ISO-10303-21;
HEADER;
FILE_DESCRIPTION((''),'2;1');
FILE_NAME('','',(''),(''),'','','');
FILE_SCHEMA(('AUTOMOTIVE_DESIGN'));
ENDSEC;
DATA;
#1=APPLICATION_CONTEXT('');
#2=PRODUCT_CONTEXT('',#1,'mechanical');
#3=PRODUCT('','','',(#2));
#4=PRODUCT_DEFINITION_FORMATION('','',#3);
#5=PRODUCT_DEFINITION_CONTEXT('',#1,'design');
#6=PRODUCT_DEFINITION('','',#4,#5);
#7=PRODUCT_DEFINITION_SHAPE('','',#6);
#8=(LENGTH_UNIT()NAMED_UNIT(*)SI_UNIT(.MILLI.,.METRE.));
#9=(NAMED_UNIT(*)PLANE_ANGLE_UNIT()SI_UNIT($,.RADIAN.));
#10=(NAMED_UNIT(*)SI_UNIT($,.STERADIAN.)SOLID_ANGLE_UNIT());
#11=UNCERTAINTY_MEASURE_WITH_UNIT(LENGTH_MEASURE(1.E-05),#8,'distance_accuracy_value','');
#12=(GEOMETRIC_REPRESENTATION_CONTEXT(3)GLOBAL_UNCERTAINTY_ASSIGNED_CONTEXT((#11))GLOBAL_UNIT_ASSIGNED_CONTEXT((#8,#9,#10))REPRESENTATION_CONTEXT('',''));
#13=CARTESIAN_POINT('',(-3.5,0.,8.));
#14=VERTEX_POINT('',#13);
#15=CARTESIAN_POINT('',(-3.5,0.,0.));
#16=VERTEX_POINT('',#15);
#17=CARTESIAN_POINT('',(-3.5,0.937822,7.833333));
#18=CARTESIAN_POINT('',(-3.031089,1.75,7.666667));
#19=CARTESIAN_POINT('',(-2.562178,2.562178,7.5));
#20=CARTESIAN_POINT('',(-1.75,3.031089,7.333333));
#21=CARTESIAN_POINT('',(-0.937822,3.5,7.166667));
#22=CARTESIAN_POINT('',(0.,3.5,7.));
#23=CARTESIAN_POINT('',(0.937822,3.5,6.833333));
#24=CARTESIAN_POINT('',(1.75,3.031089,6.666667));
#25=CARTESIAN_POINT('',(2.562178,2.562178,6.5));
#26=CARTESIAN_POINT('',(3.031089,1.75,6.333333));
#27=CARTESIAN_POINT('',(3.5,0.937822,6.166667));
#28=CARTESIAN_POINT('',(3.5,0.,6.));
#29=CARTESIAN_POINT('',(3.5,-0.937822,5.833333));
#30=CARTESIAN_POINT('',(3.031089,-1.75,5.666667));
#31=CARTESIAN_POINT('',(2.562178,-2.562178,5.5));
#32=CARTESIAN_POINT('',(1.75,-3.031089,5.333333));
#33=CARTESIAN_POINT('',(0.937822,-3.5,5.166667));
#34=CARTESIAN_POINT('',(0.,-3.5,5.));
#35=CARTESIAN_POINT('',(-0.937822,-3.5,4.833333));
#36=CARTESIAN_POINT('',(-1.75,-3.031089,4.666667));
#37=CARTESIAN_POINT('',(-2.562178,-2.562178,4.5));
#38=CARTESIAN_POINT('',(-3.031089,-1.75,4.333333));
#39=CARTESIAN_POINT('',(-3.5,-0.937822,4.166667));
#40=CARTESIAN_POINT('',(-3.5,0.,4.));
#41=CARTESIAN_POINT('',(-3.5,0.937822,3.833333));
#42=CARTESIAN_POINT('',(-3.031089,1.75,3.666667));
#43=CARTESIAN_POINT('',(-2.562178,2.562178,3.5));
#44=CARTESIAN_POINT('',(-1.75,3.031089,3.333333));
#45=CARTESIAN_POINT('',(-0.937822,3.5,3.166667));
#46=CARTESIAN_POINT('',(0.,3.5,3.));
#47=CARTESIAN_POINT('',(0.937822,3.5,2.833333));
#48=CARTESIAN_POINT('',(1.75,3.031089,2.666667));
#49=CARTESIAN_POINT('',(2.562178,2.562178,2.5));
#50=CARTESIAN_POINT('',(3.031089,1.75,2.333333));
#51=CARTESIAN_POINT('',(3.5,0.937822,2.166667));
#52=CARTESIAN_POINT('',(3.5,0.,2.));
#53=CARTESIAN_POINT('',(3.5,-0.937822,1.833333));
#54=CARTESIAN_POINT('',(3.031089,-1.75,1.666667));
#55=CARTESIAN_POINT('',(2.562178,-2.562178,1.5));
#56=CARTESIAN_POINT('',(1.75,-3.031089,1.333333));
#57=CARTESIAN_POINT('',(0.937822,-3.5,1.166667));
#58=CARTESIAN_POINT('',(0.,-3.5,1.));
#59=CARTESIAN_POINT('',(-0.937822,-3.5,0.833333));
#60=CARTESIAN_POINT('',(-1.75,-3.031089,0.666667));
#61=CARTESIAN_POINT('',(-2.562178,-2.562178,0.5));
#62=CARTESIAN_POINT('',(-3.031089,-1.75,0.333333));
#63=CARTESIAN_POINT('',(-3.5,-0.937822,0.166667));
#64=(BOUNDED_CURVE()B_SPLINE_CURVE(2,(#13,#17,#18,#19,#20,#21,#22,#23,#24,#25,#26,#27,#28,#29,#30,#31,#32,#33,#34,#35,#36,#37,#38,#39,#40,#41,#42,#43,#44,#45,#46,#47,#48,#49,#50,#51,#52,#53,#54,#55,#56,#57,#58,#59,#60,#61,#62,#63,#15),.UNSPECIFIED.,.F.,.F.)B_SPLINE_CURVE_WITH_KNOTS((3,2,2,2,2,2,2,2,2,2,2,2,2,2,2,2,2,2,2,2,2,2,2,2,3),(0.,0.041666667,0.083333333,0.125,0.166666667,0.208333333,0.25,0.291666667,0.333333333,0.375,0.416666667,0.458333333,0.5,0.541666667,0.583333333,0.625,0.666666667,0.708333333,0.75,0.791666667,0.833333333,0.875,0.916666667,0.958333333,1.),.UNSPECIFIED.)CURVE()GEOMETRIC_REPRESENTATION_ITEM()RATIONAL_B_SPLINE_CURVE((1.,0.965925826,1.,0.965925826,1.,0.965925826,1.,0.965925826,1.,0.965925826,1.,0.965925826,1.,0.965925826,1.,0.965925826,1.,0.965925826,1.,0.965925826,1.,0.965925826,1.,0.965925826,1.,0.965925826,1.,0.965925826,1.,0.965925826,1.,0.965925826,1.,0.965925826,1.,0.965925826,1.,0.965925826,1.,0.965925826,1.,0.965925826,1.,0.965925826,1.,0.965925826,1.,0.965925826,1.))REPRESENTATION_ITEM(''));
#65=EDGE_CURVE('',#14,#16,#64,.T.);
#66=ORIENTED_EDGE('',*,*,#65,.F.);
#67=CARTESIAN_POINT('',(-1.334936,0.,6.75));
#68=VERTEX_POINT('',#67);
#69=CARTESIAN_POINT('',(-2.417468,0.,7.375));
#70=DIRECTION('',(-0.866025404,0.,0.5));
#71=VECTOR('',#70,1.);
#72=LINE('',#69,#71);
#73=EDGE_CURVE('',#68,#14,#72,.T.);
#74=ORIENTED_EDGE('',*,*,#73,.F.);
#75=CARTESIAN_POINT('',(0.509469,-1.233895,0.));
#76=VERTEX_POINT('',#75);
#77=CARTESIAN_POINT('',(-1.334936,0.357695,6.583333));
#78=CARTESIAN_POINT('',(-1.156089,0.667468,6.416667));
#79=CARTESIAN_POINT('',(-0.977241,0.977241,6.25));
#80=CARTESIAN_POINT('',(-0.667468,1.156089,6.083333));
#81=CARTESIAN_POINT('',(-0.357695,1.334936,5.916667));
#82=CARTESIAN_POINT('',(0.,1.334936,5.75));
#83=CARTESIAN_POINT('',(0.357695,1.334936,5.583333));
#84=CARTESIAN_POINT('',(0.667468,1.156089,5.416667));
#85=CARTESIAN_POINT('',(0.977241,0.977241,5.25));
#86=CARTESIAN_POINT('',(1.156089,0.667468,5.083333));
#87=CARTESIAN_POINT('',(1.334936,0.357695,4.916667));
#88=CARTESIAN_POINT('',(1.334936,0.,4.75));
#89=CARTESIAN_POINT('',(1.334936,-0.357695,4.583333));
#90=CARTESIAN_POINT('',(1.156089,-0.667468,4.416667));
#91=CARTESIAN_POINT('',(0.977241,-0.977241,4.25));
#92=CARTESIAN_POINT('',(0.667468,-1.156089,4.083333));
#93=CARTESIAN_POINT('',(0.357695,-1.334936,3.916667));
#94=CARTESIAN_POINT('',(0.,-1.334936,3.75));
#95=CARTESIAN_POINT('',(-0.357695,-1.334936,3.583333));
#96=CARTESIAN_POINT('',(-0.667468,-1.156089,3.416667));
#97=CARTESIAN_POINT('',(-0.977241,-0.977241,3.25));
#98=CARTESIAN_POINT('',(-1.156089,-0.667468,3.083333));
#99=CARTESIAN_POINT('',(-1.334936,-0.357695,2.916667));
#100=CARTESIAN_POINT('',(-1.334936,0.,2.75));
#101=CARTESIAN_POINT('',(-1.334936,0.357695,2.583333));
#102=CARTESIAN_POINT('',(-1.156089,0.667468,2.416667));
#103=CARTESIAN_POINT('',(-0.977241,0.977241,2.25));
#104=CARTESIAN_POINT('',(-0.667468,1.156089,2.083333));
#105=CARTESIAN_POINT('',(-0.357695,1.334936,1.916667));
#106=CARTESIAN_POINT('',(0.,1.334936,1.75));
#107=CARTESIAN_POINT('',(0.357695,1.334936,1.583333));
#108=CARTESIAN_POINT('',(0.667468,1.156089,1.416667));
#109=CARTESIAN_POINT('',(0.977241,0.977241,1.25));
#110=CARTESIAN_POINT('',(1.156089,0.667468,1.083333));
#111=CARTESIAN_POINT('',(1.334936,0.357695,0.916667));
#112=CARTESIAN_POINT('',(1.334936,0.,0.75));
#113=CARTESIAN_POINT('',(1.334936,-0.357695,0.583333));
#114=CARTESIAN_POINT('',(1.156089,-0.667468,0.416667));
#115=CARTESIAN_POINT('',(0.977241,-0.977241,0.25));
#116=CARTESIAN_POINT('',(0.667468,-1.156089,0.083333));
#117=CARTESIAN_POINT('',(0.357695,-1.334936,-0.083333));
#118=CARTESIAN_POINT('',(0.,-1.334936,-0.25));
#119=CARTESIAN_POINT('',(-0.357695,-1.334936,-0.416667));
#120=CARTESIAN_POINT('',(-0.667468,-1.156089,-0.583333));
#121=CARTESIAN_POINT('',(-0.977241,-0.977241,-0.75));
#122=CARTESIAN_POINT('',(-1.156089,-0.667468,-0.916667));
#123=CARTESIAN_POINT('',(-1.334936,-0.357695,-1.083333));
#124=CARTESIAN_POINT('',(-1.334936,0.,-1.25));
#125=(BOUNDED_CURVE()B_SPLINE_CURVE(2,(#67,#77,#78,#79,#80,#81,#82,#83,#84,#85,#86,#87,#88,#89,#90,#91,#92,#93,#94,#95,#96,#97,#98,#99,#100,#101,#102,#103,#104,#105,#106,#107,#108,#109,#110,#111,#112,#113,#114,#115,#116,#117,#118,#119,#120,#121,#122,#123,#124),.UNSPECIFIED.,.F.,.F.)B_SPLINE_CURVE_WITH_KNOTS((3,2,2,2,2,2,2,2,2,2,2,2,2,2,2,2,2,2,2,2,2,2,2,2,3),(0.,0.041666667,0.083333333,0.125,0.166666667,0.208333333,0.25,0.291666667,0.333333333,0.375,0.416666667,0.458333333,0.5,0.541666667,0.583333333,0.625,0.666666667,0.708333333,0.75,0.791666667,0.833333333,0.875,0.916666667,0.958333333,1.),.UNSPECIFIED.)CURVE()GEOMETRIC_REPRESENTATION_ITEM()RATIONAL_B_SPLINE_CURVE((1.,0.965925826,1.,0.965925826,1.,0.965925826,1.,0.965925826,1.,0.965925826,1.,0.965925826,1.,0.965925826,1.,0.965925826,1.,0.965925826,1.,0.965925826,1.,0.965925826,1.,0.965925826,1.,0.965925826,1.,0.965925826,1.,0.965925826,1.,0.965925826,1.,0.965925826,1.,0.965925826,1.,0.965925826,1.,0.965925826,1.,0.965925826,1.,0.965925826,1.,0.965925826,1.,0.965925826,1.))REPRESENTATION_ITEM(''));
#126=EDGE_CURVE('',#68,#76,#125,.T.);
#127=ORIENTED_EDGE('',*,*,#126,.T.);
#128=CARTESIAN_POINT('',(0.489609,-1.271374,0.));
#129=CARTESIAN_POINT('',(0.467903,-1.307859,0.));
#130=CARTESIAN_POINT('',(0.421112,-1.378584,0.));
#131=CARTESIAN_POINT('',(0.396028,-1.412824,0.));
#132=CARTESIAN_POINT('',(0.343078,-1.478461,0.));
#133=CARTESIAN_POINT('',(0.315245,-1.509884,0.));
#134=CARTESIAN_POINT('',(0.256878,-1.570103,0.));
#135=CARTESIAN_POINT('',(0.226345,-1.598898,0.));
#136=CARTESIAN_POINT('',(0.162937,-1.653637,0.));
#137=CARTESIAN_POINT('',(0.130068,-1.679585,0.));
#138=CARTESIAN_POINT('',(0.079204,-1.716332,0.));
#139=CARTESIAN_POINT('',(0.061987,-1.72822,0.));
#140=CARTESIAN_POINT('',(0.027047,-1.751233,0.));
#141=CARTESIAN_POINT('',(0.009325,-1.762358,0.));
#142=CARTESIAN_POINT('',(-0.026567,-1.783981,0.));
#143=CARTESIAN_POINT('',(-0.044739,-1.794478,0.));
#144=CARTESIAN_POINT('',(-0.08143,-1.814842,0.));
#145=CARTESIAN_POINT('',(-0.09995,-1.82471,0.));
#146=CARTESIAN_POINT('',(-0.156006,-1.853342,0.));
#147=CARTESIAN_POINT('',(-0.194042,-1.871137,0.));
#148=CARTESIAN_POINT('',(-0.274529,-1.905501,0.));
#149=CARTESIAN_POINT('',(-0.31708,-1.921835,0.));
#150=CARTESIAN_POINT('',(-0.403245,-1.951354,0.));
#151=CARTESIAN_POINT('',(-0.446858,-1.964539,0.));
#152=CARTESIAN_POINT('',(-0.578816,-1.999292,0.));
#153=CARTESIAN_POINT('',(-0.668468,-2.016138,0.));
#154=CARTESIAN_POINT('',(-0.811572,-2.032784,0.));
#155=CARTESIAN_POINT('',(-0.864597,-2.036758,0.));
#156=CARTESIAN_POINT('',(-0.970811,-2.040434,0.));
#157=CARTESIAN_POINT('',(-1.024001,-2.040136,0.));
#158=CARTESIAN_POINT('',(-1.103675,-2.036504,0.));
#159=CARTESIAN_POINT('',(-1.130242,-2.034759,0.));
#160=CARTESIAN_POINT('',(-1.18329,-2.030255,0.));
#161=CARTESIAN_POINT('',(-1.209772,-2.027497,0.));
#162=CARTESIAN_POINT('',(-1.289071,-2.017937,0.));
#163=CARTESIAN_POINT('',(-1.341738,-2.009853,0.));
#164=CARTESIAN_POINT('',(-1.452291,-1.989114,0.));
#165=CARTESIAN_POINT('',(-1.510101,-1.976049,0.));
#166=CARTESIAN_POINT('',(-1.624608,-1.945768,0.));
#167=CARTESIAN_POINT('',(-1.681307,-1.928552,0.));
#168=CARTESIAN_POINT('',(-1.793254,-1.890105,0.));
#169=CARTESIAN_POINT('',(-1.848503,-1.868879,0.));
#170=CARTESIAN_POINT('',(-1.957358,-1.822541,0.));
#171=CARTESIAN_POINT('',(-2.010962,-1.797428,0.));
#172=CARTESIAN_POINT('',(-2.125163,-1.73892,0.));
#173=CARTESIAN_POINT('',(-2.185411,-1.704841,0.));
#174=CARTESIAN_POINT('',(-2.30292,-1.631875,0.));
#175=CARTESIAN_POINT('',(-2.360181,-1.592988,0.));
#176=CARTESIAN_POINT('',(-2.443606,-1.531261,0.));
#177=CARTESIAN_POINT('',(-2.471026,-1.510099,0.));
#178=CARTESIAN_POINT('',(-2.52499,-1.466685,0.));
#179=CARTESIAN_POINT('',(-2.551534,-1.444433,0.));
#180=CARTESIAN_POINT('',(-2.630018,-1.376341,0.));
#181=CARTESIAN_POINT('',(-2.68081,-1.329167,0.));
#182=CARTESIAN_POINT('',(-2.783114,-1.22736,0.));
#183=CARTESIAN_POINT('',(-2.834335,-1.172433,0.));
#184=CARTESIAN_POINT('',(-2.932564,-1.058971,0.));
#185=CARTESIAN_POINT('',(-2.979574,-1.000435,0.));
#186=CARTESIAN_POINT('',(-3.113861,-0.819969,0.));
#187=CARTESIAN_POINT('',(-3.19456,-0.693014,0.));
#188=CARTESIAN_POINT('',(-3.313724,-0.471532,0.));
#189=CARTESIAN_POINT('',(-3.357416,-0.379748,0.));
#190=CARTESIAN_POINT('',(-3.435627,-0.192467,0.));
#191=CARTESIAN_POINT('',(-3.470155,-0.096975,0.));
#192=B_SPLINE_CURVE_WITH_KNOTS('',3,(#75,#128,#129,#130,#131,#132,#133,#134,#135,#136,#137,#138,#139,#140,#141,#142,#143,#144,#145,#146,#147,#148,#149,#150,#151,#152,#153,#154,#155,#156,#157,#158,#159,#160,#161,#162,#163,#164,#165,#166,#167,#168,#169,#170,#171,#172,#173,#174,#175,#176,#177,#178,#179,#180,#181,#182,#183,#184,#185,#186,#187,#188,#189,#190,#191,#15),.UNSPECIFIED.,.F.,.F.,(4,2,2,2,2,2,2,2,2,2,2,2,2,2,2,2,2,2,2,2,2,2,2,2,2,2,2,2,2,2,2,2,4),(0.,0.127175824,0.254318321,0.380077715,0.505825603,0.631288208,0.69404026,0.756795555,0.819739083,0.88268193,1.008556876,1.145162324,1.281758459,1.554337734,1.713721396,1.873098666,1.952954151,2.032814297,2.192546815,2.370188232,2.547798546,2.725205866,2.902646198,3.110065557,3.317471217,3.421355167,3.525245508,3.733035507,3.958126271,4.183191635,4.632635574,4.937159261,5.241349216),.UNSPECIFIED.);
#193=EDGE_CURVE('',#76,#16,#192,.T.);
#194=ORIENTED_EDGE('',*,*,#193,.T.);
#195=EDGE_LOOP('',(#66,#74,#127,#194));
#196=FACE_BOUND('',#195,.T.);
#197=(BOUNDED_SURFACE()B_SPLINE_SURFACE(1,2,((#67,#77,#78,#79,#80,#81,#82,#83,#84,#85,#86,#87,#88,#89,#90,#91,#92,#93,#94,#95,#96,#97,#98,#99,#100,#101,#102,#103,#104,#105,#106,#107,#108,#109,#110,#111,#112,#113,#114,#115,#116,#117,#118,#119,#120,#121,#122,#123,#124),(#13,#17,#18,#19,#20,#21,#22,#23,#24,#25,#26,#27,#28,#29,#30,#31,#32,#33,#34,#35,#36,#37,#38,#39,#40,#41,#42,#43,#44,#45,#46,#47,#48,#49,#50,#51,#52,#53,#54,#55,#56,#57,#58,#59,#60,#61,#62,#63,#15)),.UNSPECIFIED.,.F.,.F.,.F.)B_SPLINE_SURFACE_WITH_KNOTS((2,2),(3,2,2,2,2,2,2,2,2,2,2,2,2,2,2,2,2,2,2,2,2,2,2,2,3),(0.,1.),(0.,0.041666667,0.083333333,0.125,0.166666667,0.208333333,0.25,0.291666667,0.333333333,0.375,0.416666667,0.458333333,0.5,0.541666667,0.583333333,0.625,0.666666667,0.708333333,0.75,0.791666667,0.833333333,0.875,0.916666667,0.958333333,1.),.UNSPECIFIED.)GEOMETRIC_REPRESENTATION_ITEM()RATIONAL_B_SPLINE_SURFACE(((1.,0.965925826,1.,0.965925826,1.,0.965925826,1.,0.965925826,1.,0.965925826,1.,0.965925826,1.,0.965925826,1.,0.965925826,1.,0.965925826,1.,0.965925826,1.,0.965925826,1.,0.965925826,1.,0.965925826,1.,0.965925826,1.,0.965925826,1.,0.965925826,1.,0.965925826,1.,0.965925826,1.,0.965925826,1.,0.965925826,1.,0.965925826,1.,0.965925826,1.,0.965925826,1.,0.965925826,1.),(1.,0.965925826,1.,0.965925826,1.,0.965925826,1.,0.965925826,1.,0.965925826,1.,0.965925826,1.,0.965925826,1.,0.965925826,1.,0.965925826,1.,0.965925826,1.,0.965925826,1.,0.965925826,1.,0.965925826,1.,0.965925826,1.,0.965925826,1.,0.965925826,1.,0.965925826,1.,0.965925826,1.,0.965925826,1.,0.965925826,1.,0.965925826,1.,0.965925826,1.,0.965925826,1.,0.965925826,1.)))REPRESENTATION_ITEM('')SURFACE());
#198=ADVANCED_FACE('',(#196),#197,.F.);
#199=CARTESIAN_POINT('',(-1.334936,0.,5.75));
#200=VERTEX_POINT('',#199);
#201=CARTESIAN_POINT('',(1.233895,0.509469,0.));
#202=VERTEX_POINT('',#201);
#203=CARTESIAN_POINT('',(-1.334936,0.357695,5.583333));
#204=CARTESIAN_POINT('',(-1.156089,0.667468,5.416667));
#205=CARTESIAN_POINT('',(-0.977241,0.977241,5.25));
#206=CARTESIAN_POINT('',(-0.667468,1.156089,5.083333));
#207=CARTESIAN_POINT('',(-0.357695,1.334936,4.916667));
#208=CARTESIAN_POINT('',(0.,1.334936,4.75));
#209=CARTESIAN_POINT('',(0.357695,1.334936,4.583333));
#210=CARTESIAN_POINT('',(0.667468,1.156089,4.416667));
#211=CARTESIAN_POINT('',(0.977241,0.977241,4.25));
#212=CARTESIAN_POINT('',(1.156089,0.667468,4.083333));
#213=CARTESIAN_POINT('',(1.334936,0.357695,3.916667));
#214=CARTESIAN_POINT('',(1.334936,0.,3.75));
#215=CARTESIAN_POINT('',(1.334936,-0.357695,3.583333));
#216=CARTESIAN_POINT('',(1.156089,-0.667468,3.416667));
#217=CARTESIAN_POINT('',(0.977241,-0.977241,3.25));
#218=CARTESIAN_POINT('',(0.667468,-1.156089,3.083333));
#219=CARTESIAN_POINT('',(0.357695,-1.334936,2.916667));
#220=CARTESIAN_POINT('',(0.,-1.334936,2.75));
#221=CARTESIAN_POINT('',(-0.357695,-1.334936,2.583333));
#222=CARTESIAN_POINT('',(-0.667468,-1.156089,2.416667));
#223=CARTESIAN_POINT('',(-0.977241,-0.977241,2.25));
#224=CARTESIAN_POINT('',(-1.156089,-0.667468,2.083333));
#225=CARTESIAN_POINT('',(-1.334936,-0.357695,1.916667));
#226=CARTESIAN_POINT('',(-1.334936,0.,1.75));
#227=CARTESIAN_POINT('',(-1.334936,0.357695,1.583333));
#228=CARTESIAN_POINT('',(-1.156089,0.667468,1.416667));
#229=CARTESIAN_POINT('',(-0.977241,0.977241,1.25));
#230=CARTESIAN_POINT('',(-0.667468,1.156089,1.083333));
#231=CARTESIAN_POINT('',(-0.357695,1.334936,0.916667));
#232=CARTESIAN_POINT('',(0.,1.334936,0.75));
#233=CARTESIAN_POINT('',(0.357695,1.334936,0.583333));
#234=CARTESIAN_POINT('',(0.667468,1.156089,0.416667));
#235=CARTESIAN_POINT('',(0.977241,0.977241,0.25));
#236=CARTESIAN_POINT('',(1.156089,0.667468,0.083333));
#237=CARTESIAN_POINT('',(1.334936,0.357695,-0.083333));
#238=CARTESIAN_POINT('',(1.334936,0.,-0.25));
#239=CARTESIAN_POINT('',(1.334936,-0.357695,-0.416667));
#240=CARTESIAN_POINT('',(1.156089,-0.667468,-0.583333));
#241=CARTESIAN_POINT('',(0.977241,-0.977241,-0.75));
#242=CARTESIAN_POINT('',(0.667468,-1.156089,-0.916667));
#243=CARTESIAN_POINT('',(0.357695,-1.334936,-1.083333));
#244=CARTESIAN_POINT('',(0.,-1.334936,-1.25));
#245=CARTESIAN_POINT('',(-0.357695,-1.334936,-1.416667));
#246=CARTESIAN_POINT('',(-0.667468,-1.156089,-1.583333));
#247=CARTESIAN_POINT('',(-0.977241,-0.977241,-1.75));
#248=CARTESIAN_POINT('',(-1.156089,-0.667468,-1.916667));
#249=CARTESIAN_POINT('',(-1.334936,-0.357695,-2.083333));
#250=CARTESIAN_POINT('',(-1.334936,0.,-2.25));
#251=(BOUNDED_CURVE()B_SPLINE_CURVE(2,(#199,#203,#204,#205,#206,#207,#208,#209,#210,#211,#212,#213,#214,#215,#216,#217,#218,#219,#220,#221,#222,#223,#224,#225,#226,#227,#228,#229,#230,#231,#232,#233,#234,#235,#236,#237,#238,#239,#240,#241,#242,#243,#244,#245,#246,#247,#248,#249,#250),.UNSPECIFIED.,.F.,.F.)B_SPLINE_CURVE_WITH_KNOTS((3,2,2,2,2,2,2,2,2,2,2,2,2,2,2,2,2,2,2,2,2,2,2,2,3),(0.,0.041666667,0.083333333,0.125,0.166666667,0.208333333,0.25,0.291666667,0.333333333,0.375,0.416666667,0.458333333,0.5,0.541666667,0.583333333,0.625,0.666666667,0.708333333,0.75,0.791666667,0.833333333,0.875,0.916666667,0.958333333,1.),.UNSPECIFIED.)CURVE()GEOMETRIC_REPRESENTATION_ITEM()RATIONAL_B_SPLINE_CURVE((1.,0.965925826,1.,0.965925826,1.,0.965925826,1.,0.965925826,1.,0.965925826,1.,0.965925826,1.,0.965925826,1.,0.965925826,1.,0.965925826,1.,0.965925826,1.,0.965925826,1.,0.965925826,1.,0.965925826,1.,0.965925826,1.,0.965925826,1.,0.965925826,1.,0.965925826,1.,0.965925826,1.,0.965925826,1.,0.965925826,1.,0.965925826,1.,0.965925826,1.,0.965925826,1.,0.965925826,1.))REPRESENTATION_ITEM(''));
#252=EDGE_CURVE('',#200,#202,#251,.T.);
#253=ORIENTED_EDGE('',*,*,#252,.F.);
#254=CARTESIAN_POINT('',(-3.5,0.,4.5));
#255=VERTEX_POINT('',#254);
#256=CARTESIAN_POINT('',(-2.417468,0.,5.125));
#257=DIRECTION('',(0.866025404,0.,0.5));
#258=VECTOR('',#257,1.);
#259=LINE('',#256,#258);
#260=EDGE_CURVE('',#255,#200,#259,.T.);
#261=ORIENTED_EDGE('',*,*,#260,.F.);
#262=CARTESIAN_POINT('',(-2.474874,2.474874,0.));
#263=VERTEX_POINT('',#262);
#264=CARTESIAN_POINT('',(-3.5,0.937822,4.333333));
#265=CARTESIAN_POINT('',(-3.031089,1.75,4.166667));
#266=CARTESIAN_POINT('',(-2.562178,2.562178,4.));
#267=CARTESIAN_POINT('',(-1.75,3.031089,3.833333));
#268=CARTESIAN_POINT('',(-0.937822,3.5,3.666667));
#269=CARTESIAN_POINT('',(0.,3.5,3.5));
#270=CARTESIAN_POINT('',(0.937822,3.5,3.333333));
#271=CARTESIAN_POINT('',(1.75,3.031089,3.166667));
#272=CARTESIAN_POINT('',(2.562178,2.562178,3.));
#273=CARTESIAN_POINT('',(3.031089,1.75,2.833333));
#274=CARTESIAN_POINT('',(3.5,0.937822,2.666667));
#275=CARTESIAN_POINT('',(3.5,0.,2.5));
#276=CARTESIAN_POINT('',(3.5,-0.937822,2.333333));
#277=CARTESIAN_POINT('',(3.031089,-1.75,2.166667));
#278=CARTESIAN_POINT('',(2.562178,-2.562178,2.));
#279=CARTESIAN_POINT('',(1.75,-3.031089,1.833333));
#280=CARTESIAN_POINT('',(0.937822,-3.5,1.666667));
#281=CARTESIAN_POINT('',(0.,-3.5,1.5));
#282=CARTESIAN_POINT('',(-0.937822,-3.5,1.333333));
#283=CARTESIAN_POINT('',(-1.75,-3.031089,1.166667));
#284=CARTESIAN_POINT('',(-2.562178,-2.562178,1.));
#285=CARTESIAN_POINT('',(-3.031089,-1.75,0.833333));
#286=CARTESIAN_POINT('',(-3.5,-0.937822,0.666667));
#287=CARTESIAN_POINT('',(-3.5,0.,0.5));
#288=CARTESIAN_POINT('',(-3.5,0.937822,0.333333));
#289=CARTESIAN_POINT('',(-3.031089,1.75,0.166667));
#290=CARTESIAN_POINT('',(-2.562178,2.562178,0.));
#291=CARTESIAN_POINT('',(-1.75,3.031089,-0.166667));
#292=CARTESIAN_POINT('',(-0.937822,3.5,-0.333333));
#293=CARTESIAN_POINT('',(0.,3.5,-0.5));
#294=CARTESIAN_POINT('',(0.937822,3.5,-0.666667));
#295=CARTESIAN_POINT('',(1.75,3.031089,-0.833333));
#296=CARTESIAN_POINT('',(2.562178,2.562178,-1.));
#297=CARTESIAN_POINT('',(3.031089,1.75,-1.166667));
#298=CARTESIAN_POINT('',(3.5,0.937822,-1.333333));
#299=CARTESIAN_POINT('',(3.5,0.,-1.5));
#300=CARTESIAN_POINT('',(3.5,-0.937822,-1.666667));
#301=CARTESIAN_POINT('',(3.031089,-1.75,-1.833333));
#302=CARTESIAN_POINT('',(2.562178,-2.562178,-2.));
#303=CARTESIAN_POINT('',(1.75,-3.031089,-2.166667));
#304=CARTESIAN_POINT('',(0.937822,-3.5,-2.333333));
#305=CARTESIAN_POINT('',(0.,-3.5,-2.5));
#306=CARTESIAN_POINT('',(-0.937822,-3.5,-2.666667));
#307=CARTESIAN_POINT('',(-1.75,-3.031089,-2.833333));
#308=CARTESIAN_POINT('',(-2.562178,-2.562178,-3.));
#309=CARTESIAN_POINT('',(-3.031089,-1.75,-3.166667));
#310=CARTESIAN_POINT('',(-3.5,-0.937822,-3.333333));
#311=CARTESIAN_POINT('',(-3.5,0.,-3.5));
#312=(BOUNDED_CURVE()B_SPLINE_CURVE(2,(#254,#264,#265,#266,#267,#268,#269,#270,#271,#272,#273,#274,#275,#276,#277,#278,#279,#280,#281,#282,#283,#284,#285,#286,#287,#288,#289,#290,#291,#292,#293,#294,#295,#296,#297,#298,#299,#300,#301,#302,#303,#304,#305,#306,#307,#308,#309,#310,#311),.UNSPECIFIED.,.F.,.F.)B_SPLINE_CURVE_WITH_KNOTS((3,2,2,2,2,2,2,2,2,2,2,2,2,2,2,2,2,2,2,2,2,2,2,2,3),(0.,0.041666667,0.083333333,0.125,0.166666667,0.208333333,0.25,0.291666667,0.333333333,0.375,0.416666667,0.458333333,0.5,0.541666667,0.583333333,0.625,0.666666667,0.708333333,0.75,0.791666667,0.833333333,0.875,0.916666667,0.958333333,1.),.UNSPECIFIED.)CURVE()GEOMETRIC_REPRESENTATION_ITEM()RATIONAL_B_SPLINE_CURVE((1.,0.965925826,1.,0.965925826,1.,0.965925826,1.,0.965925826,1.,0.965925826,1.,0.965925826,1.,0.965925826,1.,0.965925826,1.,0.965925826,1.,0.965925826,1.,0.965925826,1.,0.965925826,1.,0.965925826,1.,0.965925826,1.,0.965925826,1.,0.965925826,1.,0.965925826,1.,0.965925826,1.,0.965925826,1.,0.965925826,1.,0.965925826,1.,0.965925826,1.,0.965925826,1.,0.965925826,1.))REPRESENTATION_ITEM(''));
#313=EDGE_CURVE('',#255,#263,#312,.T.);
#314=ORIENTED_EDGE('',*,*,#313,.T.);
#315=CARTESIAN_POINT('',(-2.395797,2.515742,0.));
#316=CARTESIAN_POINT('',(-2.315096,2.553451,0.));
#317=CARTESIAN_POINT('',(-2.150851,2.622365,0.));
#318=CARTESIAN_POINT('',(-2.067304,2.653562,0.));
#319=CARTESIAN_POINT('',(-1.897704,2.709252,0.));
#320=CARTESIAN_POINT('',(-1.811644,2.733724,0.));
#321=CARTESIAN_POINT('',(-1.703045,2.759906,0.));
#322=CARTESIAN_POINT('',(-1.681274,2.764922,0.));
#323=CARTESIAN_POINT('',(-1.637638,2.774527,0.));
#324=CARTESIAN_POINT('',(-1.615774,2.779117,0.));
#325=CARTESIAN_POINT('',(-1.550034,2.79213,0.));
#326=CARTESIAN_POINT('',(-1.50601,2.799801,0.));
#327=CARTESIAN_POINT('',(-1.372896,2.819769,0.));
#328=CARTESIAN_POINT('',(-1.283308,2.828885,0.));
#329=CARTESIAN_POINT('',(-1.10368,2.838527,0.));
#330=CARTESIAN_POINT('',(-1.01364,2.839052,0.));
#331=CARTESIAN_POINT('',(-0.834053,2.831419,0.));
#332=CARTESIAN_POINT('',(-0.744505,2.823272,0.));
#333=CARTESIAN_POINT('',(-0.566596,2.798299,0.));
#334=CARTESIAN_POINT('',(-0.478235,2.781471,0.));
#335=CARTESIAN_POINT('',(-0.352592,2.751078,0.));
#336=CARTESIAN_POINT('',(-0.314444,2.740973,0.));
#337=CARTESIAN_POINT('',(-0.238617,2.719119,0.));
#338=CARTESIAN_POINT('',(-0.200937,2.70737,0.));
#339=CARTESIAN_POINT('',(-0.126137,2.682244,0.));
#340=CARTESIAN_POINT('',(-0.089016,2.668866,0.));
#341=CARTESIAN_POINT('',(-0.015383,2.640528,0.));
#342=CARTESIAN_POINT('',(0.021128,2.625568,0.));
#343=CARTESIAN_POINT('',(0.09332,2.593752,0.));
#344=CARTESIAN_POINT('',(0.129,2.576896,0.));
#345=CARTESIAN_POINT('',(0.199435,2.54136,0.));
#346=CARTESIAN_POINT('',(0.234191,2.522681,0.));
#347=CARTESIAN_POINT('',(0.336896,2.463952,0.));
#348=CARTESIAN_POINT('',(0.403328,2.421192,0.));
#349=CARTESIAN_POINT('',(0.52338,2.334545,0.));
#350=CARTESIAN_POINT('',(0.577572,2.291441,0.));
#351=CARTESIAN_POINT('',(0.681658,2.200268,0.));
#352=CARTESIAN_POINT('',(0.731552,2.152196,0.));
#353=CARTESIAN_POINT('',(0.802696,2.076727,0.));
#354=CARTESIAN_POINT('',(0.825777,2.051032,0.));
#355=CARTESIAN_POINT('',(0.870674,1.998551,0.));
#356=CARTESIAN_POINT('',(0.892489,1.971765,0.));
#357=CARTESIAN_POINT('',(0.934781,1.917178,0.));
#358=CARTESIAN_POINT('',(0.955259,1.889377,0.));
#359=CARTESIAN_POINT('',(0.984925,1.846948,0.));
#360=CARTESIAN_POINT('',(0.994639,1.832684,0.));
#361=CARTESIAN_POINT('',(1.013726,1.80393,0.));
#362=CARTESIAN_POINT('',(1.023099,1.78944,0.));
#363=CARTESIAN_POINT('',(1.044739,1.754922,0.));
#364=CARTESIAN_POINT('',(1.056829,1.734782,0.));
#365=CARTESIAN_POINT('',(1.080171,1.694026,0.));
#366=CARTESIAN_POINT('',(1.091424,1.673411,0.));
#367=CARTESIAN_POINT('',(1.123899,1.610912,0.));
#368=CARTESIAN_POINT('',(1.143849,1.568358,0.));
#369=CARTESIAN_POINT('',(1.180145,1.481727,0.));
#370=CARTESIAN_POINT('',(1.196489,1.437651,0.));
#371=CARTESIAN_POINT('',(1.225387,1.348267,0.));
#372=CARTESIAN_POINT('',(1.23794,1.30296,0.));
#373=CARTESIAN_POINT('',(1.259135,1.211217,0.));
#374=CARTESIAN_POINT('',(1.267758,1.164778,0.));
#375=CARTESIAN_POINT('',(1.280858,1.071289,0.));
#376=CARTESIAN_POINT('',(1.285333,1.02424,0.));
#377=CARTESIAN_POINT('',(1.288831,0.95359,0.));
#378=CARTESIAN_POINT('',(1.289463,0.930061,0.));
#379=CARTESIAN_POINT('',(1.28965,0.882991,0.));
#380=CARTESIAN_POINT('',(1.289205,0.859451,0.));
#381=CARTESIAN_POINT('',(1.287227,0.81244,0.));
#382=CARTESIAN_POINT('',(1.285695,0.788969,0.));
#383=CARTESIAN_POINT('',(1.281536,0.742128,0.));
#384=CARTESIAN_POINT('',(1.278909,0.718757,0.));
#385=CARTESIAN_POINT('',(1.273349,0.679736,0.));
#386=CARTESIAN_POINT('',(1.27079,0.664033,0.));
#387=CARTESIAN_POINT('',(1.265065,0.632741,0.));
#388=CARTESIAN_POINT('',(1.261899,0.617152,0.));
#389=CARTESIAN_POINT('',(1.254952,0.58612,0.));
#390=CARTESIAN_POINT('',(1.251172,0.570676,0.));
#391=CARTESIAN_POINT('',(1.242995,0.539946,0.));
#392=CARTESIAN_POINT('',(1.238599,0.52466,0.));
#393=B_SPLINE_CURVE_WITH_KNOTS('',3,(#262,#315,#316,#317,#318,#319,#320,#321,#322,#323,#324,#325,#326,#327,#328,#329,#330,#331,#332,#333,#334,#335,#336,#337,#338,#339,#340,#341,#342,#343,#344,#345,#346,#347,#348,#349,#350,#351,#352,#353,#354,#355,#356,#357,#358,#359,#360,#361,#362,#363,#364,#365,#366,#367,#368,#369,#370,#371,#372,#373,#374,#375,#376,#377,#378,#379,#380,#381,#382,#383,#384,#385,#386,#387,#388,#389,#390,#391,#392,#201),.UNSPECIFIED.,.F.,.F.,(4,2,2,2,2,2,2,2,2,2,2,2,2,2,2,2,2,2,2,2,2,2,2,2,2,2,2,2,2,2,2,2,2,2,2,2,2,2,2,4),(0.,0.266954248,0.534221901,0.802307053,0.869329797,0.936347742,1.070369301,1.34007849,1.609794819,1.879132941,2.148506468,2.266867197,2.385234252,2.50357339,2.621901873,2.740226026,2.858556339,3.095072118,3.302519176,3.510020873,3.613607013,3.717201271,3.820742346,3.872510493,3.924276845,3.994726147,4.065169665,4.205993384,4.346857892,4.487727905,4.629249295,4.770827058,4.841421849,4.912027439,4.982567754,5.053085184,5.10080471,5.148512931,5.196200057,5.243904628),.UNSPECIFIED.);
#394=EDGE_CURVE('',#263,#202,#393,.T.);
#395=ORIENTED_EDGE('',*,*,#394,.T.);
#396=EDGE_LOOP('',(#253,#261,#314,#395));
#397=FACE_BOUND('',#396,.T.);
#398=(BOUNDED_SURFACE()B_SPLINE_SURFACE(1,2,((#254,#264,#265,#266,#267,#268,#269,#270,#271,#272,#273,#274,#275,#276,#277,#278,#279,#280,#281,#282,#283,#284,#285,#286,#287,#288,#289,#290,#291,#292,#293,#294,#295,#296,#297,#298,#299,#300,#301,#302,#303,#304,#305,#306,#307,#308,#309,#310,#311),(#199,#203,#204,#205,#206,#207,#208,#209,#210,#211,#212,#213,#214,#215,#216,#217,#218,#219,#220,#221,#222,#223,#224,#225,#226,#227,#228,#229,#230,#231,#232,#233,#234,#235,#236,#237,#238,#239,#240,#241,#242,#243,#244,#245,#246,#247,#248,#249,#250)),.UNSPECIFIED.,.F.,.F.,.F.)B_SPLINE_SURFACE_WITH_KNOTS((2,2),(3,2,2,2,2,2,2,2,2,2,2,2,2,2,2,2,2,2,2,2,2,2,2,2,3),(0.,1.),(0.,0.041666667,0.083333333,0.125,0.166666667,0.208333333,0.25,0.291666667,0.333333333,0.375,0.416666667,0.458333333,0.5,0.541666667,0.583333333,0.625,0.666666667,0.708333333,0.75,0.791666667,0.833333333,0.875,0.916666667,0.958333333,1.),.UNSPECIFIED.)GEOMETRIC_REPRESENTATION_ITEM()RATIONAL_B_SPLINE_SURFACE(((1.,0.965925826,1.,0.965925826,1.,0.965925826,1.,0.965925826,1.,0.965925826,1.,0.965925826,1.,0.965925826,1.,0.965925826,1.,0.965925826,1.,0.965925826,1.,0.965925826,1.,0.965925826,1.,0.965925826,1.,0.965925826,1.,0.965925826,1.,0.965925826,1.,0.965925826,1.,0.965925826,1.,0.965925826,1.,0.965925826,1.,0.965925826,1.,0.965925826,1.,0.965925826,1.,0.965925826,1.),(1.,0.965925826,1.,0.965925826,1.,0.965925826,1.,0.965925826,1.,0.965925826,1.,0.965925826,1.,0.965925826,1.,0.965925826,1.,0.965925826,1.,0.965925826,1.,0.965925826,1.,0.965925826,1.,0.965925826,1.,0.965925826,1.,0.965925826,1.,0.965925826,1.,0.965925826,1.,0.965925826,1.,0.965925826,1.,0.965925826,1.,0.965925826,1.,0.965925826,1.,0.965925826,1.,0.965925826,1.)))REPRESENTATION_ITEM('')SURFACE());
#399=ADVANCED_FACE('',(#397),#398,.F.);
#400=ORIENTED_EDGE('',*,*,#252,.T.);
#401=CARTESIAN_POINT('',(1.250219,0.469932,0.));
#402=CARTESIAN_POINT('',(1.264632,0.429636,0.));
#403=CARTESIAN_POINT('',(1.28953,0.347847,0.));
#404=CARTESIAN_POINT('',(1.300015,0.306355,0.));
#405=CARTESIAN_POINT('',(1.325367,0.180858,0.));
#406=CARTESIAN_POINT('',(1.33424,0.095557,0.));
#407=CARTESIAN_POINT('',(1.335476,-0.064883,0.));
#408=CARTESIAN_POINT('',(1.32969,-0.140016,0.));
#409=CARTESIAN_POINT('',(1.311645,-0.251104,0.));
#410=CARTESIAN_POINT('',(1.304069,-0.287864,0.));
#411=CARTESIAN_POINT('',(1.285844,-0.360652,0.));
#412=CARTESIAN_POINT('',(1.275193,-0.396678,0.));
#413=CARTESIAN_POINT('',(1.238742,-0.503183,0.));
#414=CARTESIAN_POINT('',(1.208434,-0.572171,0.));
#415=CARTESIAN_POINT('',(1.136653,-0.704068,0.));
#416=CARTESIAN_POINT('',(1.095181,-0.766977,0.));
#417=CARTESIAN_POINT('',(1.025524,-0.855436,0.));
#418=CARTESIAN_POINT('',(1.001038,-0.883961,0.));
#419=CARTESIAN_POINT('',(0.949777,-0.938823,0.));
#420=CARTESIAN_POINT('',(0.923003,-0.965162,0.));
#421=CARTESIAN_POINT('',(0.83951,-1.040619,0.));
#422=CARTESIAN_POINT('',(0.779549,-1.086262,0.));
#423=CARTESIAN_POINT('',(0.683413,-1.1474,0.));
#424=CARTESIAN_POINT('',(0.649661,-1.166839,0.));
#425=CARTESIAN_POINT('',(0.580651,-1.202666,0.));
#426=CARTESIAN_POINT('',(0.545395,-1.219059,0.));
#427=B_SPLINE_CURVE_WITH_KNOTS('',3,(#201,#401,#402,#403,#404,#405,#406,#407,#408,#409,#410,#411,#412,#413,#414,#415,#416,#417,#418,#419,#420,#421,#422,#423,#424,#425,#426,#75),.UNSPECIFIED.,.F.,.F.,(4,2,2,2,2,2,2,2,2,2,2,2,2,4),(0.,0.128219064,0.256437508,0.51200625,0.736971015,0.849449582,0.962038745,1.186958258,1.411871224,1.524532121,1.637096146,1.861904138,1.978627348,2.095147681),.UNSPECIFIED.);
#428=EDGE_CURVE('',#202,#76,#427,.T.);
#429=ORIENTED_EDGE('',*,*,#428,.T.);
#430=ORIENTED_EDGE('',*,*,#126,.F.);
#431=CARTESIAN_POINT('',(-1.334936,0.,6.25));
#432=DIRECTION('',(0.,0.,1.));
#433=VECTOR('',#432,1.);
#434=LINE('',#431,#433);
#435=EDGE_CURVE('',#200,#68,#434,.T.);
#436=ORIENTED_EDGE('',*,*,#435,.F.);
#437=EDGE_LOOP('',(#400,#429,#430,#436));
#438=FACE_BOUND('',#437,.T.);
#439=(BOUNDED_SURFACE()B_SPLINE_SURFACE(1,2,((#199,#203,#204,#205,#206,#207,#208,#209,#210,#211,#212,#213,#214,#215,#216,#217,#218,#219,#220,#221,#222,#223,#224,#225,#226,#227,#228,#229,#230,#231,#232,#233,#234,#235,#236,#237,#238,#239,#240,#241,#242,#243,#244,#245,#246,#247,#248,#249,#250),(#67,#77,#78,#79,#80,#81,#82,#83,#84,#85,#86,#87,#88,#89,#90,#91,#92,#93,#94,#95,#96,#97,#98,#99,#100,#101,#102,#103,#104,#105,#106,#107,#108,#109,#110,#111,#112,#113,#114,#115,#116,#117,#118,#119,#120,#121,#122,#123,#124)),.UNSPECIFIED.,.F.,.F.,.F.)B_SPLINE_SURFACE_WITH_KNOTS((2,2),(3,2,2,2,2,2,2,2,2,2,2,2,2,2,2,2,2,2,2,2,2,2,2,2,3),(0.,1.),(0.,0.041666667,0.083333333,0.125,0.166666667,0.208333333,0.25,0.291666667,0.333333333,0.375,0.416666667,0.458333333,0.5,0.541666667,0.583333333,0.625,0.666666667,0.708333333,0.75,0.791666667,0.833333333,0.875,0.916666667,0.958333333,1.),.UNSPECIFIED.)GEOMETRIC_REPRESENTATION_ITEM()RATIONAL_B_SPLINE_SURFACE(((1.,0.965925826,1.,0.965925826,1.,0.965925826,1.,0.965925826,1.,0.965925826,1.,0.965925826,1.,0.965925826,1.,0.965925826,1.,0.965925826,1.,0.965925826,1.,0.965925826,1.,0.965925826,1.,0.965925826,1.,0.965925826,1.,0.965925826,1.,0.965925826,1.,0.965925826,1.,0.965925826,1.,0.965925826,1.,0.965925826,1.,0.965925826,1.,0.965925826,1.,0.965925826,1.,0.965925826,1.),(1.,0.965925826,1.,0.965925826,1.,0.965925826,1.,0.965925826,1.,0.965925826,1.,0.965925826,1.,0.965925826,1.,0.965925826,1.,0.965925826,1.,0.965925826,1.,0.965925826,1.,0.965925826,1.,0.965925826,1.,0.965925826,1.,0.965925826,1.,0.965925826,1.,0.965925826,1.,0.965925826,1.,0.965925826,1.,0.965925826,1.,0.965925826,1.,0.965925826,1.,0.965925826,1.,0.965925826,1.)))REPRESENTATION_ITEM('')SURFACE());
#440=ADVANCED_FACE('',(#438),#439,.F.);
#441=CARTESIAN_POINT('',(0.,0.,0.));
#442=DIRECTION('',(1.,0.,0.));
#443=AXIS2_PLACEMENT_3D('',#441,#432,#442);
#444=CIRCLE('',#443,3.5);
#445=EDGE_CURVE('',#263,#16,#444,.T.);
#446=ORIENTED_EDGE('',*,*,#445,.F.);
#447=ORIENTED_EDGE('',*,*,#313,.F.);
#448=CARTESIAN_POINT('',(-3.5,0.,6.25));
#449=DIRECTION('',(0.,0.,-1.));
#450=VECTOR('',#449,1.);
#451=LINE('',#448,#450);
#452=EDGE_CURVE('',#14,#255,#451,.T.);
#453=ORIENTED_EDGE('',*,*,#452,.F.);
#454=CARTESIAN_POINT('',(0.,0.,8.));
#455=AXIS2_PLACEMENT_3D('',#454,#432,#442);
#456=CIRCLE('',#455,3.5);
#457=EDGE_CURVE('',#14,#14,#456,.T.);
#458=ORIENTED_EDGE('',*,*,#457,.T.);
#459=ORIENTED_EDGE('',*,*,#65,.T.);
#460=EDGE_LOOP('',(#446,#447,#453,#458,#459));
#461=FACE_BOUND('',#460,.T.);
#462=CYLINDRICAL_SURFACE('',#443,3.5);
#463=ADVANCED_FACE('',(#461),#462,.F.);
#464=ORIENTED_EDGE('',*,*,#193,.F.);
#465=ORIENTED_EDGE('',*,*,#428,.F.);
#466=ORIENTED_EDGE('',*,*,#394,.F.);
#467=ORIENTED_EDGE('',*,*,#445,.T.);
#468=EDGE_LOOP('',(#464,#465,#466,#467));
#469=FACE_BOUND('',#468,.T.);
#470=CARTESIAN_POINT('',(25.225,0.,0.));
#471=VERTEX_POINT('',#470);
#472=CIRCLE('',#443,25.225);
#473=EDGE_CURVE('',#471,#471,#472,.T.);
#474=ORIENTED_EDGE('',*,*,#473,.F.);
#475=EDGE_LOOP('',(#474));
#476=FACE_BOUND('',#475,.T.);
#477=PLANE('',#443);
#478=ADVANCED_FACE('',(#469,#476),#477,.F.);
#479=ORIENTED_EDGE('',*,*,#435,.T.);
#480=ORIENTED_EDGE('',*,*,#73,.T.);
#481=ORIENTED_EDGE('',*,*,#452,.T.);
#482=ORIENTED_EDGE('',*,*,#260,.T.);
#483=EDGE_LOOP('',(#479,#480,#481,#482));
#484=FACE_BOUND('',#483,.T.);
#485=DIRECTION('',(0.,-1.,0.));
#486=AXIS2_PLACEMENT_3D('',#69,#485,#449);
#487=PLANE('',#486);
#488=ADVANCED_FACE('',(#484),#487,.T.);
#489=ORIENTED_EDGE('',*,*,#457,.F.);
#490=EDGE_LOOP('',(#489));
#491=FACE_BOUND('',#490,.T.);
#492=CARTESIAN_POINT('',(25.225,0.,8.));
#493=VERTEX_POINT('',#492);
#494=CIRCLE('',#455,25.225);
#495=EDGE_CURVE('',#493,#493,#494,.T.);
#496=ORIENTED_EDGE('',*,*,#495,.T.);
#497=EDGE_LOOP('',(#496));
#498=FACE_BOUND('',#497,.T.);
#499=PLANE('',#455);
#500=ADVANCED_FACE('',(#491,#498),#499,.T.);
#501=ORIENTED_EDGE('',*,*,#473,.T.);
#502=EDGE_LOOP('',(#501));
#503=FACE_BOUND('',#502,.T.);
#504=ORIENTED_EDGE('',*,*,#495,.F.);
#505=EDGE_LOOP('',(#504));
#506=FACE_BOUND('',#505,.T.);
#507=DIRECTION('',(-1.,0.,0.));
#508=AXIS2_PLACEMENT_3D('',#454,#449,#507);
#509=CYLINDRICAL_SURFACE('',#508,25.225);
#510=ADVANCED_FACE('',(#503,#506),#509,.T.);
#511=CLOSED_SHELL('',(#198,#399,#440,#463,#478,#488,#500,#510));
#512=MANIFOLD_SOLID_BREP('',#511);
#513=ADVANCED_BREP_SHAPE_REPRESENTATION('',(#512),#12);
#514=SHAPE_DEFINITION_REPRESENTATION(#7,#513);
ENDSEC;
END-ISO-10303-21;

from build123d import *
from build123d.topology import SkipClean

# Parameters (mm, degrees)
CROQUIS1_R                 = 25.225
SALIENTE_EXTRUIR1_DEPTH    = 8
CROQUIS8_R                 = 3.5
CORTAR_EXTRUIR1_DEPTH      = 8
ROSCA1_PITCH               = 4
CORTAR_EXTRUIR2_DEPTH      = 37.559595635
CORTAR_EXTRUIR2_DEPTH_BACK = 37.559595635
CROQUIS11_W                = 9.138603142
CROQUIS11_H                = 6.021536875


with BuildPart() as part:
    # Croquis1 → Saliente-Extruir1 (new body)
    with BuildSketch(Plane.XY):
        Circle(CROQUIS1_R)
    extrude(amount=SALIENTE_EXTRUIR1_DEPTH)

    # Croquis8 → Cortar-Extruir1 (cut)
    with BuildSketch(Plane.XY.offset(8)):
        Circle(CROQUIS8_R)
    extrude(amount=-CORTAR_EXTRUIR1_DEPTH, mode=Mode.SUBTRACT)

    # Rosca1: the profile of Perfil de rosca2 profile screwed along a right-hand helix of 2 turns, 12 arcs to a turn; built about Z, then put on its axis
    with SkipClean():  # the faces are left unmerged after this step: merging them gives an invalid solid
        rosca1_z = Axis((0, 0, 0), (0, 0, 1))
        rosca1_corners = [(3.5003, 0, -0.000173205), (3.5003, 0, 3.500173194), (1.3349365, 0, 2.249999995), (1.3349365, 0, 1.249999995)]
        with BuildLine(mode=Mode.PRIVATE) as rosca1_profile:
            Line(rosca1_corners[0], rosca1_corners[1])
            Line(rosca1_corners[1], rosca1_corners[2])
            Line(rosca1_corners[2], rosca1_corners[3])
            Line(rosca1_corners[3], rosca1_corners[0])
        rosca1_cap = Face(rosca1_profile.wire())
        rosca1_turn_angles = [0, 15, 30, 45, 60, 75, 90, 105, 120, 135, 150, 165, 180, 195, 210, 225, 240, 255, 270, 285, 300, 315, 330, 345, 360]
        rosca1_turn_weights = [1, 0.9659258262890683, 1, 0.9659258262890683, 1, 0.9659258262890683, 1, 0.9659258262890683, 1, 0.9659258262890683, 1, 0.9659258262890683, 1, 0.9659258262890683, 1, 0.9659258262890683, 1, 0.9659258262890683, 1, 0.9659258262890683, 1, 0.9659258262890683, 1, 0.9659258262890683, 1]
        rosca1_turn_rails = [Edge.make_bspline([Vector(p[0], p[1], 0).rotate(rosca1_z, rosca1_turn_angles[k]) / rosca1_turn_weights[k] + Vector(0, 0, p[2] + ROSCA1_PITCH * rosca1_turn_angles[k] / 360) for k in range(25)], [0, 0, 0, 1, 1, 2, 2, 3, 3, 4, 4, 5, 5, 6, 6, 7, 7, 8, 8, 9, 9, 10, 10, 11, 11, 12, 12, 12], 2, rosca1_turn_weights) for p in rosca1_corners]
        rosca1_turn_sides = [Face.make_surface_from_curves(rosca1_turn_rails[p[0]], rosca1_turn_rails[p[1]]) for p in [(0, 1), (1, 2), (2, 3), (3, 0)]]
        rosca1 = Plane(origin=(0, 0, 8), x_dir=(-1, 0, 0), z_dir=(0, 0, -1)) * Solid(Shell([*[p.moved(Location((0, 0, ROSCA1_PITCH * i))) for i in range(2) for p in rosca1_turn_sides], rosca1_cap, rosca1_cap.rotate(rosca1_z, 720).moved(Location((0, 0, ROSCA1_PITCH * 720 / 360)))]))
        add(rosca1)

    # Croquis11 → Cortar-Extruir2 (cut, two sides: drawn at the far end of the back side and taken through both)
    with SkipClean():  # the faces are left unmerged after this step: merging them gives an invalid solid
        with BuildSketch(Plane(origin=(0, 0, 0), x_dir=(1, 0, 0), z_dir=(0, 1, 0)).offset(-CORTAR_EXTRUIR2_DEPTH_BACK)):
            with Locations((0.536755305, 3.010768438)):
                Rectangle(CROQUIS11_W, CROQUIS11_H)
        extrude(amount=CORTAR_EXTRUIR2_DEPTH + CORTAR_EXTRUIR2_DEPTH_BACK, mode=Mode.SUBTRACT)


solid = part.part
